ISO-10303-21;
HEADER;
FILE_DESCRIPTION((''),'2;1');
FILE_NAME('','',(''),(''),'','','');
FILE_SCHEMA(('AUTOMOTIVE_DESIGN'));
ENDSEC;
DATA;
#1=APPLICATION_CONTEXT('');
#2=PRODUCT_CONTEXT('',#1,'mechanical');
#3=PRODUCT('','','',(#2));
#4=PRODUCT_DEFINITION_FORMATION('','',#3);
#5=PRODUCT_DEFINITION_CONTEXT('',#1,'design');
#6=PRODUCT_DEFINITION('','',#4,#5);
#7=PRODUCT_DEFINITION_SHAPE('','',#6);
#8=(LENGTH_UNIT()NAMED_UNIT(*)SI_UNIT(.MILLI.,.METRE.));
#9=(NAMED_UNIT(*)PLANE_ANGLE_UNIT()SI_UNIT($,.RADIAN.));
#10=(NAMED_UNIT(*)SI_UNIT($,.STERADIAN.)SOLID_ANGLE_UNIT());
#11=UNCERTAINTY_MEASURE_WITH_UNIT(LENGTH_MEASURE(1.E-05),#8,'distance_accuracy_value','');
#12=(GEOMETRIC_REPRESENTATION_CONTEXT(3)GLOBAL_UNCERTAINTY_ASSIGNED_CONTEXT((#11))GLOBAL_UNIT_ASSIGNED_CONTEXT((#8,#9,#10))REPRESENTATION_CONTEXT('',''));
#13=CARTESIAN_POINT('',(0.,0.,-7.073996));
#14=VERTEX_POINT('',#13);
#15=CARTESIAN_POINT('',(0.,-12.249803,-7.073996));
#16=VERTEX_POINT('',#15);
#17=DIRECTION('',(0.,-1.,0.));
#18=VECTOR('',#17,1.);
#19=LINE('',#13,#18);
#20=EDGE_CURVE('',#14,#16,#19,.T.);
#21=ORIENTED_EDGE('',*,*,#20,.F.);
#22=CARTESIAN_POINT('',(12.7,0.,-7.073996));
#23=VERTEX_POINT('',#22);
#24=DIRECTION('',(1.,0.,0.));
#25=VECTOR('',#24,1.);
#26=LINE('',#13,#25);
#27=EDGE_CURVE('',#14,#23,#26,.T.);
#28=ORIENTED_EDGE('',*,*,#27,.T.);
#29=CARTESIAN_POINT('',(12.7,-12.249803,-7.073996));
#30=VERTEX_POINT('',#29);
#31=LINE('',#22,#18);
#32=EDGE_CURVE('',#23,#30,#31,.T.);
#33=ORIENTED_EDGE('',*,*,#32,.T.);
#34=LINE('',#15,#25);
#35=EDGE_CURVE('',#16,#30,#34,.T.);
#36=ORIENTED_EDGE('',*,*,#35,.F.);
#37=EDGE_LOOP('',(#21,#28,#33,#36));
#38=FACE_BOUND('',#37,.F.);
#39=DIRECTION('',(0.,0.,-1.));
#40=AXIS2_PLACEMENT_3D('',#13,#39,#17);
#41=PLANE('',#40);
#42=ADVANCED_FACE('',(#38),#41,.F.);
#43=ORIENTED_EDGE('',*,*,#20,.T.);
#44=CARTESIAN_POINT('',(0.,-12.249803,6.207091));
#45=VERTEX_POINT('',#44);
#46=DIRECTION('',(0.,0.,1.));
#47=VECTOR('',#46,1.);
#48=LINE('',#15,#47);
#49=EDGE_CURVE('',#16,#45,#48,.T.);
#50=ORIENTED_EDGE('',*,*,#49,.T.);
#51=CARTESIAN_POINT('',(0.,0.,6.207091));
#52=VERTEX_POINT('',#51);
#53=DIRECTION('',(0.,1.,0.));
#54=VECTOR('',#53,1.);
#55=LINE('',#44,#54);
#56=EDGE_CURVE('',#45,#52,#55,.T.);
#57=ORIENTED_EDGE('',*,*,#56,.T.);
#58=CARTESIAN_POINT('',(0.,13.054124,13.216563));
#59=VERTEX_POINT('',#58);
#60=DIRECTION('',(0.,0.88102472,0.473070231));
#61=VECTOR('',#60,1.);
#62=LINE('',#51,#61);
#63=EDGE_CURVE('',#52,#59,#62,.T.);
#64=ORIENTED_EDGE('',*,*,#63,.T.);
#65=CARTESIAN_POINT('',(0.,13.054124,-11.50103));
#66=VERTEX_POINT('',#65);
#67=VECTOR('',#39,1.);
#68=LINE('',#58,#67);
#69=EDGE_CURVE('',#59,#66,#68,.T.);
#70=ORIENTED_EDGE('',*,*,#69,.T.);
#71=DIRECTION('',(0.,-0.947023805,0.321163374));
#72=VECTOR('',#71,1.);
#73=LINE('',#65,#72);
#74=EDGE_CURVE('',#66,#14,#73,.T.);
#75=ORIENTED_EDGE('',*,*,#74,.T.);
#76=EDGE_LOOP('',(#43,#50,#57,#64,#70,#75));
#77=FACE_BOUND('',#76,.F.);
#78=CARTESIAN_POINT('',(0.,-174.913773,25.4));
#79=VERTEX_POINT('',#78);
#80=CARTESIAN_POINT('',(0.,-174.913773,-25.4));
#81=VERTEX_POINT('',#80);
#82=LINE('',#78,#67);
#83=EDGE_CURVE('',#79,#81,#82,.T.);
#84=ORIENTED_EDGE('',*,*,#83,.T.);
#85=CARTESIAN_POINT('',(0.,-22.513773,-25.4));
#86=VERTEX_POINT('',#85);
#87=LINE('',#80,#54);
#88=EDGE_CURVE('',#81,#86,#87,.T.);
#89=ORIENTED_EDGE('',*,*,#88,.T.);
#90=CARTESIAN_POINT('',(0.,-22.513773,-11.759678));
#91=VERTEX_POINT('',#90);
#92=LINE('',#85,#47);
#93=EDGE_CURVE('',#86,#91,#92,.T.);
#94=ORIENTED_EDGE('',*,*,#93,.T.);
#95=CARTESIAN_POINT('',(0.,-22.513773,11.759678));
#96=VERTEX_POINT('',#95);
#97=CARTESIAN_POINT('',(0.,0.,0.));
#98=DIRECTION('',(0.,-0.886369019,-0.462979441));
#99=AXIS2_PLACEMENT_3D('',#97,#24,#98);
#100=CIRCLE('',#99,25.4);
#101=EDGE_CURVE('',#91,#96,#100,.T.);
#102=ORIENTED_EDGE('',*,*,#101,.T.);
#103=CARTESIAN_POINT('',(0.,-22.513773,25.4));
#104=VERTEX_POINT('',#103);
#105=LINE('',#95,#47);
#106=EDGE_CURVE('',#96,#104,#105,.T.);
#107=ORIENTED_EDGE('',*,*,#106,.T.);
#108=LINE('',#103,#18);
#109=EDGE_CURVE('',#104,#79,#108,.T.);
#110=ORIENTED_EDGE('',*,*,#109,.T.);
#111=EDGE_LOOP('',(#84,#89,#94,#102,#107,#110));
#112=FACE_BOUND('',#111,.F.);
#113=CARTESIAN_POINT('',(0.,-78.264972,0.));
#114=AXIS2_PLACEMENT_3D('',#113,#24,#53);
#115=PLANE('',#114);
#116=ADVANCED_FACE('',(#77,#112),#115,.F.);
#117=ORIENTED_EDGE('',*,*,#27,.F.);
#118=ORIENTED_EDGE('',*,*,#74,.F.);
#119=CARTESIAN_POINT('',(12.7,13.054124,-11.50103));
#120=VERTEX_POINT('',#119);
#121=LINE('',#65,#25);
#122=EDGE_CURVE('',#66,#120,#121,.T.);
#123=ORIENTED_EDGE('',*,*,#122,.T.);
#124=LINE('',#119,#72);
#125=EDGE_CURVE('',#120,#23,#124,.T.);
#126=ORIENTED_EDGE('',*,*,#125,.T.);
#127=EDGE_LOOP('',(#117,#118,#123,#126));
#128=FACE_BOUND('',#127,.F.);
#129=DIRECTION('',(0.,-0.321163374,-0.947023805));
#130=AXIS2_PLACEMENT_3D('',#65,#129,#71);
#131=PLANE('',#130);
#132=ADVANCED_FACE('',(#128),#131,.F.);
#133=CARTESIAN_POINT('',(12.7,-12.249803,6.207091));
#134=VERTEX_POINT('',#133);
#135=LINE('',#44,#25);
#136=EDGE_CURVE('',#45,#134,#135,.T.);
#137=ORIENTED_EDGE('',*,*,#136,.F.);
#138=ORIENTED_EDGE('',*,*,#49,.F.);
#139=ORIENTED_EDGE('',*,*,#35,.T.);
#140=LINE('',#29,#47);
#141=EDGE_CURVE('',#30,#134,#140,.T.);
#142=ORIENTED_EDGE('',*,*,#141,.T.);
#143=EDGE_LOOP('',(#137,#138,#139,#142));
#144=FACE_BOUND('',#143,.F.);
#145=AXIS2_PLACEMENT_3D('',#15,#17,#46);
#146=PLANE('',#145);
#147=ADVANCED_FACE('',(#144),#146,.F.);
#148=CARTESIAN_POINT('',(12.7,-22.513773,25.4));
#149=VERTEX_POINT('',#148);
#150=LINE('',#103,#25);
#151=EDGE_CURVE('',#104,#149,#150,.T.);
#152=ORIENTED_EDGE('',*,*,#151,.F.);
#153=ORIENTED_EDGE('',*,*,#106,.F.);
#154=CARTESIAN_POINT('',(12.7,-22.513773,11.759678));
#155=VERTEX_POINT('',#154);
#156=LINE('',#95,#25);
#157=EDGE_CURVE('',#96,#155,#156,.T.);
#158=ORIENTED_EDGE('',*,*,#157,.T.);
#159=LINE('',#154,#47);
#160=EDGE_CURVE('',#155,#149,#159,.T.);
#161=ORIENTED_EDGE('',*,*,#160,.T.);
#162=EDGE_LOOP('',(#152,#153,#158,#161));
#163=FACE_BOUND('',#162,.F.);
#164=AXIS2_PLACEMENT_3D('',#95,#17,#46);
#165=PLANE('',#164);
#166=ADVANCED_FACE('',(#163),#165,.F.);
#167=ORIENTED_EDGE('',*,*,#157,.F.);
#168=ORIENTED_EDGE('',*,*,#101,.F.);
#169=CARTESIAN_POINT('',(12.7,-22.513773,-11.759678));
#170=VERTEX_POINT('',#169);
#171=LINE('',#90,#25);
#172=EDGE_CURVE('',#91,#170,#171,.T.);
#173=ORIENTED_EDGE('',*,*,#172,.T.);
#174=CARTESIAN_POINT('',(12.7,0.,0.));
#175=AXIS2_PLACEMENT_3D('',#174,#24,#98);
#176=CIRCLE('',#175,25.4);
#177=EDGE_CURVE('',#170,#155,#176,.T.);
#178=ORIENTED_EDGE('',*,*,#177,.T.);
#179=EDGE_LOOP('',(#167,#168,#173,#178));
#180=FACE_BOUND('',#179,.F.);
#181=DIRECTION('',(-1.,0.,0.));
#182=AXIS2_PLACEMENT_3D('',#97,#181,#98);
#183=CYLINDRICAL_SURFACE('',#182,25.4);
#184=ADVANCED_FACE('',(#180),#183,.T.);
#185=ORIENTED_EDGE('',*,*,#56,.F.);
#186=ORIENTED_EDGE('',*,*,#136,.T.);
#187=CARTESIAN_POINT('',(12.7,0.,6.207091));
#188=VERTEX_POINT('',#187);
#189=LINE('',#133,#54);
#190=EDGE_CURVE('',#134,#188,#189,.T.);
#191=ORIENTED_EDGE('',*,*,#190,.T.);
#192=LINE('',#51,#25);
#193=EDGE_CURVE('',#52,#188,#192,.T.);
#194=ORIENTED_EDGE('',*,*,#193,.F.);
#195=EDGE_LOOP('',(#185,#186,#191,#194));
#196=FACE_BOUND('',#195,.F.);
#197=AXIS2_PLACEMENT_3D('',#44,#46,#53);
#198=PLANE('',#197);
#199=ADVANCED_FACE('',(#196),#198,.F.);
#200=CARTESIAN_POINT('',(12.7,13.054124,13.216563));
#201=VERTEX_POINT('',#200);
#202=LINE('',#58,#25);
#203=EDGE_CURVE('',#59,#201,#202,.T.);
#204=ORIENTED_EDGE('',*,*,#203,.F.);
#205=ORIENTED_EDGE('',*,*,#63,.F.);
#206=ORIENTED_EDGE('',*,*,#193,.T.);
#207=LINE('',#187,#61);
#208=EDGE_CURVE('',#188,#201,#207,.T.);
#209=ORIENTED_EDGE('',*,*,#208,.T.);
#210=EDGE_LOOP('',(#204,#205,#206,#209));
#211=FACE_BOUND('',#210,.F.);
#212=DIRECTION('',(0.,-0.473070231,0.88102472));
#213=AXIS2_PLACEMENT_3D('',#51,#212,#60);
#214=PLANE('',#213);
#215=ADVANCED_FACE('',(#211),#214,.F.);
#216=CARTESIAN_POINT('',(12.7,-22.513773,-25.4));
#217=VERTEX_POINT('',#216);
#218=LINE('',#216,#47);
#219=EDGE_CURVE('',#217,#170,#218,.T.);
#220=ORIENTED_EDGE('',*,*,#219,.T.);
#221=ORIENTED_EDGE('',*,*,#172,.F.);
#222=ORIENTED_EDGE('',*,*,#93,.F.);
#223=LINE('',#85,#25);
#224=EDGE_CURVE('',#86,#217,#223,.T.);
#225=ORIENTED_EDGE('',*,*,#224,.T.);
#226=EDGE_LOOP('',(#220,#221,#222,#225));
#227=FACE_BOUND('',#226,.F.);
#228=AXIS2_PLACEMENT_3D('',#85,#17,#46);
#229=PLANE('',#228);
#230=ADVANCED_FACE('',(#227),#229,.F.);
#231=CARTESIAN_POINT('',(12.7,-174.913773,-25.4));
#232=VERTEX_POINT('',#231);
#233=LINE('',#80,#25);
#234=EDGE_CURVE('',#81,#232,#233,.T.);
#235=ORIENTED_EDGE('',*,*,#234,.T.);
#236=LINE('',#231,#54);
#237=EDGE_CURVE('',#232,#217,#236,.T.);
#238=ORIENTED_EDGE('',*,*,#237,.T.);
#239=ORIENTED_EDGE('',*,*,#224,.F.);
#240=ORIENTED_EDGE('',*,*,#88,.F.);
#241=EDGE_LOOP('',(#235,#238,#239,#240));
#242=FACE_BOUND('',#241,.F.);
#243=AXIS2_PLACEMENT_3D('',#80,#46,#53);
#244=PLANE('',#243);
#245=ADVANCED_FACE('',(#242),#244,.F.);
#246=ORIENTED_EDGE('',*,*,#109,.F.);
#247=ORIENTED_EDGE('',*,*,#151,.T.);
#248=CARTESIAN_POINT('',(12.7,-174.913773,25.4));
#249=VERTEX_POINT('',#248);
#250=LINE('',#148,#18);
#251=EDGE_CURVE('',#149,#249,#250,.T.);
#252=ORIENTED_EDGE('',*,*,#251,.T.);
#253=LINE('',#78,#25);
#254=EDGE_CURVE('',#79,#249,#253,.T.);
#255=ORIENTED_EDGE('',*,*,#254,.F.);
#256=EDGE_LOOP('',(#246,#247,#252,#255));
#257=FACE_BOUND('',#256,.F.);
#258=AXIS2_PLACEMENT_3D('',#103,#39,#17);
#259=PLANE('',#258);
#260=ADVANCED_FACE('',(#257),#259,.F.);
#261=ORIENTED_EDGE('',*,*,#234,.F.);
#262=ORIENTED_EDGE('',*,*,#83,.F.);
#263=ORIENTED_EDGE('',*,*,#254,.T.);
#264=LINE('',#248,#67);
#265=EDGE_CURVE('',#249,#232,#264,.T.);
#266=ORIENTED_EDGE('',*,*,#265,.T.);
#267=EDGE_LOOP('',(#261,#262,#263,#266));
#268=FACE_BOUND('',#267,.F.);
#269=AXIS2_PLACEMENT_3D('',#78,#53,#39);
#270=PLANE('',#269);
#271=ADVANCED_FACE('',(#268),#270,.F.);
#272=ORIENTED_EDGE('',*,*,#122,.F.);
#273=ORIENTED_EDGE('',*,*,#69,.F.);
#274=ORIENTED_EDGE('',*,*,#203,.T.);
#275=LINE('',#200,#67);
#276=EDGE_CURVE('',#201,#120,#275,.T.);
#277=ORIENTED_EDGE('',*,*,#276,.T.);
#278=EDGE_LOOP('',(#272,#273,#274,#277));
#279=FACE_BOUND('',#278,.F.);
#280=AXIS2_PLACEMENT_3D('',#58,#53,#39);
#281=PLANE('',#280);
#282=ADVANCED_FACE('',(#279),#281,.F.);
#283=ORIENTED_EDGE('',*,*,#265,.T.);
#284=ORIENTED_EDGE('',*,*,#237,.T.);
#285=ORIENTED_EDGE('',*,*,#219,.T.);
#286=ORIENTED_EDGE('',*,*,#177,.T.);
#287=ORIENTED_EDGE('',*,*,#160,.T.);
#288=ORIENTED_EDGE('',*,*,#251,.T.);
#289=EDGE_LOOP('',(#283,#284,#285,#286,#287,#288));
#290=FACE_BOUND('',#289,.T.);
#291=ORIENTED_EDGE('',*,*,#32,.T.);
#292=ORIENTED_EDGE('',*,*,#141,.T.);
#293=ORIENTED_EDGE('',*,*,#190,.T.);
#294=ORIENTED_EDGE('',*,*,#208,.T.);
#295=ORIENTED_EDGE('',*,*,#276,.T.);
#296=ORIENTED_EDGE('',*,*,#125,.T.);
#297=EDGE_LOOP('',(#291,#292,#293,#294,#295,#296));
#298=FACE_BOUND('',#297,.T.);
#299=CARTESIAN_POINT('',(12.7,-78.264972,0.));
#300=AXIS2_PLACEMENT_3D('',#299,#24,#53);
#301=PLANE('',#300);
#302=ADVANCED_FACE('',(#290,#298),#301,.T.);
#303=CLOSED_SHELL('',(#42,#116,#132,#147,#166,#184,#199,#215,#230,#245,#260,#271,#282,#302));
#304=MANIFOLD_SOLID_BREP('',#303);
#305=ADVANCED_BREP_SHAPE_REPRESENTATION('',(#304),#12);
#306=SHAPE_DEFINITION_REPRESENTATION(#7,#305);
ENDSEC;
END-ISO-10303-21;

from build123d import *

# Parameters (mm, degrees)
F1_DEPTH = 12.7


# Not quite as in the source:
# - the program builds the solid bodies; features that only make, move or delete a surface that nothing else refers to are left out


with BuildPart() as f1:
    # F0 (on Right) → F1 (new body)
    with BuildSketch(Plane.YZ):
        with BuildLine():
            Line((-22.5137730746, 11.7596777994), (-22.5137730746, 25.4))
            Line((-22.5137730746, 25.4), (-174.9137730746, 25.4))
            Line((-174.9137730746, 25.4), (-174.9137730746, -25.4))
            Line((-174.9137730746, -25.4), (-22.5137730746, -25.4))
            Line((-22.5137730746, -25.4), (-22.5137730746, -11.7596777994))
            ThreePointArc((-22.5137730746, -11.7596777994), (25.4, 0), (-22.5137730746, 11.7596777994))
        make_face()
        Polygon((-12.2498031706, -7.0739961229), (-12.2498031706, 6.2070912682), (0, 6.2070912682), (13.0541240796, 13.2165625691), (13.0541240796, -11.5010300651), (0, -7.0739961229), align=None, mode=Mode.SUBTRACT)
    extrude(amount=F1_DEPTH)


solid = f1.part
